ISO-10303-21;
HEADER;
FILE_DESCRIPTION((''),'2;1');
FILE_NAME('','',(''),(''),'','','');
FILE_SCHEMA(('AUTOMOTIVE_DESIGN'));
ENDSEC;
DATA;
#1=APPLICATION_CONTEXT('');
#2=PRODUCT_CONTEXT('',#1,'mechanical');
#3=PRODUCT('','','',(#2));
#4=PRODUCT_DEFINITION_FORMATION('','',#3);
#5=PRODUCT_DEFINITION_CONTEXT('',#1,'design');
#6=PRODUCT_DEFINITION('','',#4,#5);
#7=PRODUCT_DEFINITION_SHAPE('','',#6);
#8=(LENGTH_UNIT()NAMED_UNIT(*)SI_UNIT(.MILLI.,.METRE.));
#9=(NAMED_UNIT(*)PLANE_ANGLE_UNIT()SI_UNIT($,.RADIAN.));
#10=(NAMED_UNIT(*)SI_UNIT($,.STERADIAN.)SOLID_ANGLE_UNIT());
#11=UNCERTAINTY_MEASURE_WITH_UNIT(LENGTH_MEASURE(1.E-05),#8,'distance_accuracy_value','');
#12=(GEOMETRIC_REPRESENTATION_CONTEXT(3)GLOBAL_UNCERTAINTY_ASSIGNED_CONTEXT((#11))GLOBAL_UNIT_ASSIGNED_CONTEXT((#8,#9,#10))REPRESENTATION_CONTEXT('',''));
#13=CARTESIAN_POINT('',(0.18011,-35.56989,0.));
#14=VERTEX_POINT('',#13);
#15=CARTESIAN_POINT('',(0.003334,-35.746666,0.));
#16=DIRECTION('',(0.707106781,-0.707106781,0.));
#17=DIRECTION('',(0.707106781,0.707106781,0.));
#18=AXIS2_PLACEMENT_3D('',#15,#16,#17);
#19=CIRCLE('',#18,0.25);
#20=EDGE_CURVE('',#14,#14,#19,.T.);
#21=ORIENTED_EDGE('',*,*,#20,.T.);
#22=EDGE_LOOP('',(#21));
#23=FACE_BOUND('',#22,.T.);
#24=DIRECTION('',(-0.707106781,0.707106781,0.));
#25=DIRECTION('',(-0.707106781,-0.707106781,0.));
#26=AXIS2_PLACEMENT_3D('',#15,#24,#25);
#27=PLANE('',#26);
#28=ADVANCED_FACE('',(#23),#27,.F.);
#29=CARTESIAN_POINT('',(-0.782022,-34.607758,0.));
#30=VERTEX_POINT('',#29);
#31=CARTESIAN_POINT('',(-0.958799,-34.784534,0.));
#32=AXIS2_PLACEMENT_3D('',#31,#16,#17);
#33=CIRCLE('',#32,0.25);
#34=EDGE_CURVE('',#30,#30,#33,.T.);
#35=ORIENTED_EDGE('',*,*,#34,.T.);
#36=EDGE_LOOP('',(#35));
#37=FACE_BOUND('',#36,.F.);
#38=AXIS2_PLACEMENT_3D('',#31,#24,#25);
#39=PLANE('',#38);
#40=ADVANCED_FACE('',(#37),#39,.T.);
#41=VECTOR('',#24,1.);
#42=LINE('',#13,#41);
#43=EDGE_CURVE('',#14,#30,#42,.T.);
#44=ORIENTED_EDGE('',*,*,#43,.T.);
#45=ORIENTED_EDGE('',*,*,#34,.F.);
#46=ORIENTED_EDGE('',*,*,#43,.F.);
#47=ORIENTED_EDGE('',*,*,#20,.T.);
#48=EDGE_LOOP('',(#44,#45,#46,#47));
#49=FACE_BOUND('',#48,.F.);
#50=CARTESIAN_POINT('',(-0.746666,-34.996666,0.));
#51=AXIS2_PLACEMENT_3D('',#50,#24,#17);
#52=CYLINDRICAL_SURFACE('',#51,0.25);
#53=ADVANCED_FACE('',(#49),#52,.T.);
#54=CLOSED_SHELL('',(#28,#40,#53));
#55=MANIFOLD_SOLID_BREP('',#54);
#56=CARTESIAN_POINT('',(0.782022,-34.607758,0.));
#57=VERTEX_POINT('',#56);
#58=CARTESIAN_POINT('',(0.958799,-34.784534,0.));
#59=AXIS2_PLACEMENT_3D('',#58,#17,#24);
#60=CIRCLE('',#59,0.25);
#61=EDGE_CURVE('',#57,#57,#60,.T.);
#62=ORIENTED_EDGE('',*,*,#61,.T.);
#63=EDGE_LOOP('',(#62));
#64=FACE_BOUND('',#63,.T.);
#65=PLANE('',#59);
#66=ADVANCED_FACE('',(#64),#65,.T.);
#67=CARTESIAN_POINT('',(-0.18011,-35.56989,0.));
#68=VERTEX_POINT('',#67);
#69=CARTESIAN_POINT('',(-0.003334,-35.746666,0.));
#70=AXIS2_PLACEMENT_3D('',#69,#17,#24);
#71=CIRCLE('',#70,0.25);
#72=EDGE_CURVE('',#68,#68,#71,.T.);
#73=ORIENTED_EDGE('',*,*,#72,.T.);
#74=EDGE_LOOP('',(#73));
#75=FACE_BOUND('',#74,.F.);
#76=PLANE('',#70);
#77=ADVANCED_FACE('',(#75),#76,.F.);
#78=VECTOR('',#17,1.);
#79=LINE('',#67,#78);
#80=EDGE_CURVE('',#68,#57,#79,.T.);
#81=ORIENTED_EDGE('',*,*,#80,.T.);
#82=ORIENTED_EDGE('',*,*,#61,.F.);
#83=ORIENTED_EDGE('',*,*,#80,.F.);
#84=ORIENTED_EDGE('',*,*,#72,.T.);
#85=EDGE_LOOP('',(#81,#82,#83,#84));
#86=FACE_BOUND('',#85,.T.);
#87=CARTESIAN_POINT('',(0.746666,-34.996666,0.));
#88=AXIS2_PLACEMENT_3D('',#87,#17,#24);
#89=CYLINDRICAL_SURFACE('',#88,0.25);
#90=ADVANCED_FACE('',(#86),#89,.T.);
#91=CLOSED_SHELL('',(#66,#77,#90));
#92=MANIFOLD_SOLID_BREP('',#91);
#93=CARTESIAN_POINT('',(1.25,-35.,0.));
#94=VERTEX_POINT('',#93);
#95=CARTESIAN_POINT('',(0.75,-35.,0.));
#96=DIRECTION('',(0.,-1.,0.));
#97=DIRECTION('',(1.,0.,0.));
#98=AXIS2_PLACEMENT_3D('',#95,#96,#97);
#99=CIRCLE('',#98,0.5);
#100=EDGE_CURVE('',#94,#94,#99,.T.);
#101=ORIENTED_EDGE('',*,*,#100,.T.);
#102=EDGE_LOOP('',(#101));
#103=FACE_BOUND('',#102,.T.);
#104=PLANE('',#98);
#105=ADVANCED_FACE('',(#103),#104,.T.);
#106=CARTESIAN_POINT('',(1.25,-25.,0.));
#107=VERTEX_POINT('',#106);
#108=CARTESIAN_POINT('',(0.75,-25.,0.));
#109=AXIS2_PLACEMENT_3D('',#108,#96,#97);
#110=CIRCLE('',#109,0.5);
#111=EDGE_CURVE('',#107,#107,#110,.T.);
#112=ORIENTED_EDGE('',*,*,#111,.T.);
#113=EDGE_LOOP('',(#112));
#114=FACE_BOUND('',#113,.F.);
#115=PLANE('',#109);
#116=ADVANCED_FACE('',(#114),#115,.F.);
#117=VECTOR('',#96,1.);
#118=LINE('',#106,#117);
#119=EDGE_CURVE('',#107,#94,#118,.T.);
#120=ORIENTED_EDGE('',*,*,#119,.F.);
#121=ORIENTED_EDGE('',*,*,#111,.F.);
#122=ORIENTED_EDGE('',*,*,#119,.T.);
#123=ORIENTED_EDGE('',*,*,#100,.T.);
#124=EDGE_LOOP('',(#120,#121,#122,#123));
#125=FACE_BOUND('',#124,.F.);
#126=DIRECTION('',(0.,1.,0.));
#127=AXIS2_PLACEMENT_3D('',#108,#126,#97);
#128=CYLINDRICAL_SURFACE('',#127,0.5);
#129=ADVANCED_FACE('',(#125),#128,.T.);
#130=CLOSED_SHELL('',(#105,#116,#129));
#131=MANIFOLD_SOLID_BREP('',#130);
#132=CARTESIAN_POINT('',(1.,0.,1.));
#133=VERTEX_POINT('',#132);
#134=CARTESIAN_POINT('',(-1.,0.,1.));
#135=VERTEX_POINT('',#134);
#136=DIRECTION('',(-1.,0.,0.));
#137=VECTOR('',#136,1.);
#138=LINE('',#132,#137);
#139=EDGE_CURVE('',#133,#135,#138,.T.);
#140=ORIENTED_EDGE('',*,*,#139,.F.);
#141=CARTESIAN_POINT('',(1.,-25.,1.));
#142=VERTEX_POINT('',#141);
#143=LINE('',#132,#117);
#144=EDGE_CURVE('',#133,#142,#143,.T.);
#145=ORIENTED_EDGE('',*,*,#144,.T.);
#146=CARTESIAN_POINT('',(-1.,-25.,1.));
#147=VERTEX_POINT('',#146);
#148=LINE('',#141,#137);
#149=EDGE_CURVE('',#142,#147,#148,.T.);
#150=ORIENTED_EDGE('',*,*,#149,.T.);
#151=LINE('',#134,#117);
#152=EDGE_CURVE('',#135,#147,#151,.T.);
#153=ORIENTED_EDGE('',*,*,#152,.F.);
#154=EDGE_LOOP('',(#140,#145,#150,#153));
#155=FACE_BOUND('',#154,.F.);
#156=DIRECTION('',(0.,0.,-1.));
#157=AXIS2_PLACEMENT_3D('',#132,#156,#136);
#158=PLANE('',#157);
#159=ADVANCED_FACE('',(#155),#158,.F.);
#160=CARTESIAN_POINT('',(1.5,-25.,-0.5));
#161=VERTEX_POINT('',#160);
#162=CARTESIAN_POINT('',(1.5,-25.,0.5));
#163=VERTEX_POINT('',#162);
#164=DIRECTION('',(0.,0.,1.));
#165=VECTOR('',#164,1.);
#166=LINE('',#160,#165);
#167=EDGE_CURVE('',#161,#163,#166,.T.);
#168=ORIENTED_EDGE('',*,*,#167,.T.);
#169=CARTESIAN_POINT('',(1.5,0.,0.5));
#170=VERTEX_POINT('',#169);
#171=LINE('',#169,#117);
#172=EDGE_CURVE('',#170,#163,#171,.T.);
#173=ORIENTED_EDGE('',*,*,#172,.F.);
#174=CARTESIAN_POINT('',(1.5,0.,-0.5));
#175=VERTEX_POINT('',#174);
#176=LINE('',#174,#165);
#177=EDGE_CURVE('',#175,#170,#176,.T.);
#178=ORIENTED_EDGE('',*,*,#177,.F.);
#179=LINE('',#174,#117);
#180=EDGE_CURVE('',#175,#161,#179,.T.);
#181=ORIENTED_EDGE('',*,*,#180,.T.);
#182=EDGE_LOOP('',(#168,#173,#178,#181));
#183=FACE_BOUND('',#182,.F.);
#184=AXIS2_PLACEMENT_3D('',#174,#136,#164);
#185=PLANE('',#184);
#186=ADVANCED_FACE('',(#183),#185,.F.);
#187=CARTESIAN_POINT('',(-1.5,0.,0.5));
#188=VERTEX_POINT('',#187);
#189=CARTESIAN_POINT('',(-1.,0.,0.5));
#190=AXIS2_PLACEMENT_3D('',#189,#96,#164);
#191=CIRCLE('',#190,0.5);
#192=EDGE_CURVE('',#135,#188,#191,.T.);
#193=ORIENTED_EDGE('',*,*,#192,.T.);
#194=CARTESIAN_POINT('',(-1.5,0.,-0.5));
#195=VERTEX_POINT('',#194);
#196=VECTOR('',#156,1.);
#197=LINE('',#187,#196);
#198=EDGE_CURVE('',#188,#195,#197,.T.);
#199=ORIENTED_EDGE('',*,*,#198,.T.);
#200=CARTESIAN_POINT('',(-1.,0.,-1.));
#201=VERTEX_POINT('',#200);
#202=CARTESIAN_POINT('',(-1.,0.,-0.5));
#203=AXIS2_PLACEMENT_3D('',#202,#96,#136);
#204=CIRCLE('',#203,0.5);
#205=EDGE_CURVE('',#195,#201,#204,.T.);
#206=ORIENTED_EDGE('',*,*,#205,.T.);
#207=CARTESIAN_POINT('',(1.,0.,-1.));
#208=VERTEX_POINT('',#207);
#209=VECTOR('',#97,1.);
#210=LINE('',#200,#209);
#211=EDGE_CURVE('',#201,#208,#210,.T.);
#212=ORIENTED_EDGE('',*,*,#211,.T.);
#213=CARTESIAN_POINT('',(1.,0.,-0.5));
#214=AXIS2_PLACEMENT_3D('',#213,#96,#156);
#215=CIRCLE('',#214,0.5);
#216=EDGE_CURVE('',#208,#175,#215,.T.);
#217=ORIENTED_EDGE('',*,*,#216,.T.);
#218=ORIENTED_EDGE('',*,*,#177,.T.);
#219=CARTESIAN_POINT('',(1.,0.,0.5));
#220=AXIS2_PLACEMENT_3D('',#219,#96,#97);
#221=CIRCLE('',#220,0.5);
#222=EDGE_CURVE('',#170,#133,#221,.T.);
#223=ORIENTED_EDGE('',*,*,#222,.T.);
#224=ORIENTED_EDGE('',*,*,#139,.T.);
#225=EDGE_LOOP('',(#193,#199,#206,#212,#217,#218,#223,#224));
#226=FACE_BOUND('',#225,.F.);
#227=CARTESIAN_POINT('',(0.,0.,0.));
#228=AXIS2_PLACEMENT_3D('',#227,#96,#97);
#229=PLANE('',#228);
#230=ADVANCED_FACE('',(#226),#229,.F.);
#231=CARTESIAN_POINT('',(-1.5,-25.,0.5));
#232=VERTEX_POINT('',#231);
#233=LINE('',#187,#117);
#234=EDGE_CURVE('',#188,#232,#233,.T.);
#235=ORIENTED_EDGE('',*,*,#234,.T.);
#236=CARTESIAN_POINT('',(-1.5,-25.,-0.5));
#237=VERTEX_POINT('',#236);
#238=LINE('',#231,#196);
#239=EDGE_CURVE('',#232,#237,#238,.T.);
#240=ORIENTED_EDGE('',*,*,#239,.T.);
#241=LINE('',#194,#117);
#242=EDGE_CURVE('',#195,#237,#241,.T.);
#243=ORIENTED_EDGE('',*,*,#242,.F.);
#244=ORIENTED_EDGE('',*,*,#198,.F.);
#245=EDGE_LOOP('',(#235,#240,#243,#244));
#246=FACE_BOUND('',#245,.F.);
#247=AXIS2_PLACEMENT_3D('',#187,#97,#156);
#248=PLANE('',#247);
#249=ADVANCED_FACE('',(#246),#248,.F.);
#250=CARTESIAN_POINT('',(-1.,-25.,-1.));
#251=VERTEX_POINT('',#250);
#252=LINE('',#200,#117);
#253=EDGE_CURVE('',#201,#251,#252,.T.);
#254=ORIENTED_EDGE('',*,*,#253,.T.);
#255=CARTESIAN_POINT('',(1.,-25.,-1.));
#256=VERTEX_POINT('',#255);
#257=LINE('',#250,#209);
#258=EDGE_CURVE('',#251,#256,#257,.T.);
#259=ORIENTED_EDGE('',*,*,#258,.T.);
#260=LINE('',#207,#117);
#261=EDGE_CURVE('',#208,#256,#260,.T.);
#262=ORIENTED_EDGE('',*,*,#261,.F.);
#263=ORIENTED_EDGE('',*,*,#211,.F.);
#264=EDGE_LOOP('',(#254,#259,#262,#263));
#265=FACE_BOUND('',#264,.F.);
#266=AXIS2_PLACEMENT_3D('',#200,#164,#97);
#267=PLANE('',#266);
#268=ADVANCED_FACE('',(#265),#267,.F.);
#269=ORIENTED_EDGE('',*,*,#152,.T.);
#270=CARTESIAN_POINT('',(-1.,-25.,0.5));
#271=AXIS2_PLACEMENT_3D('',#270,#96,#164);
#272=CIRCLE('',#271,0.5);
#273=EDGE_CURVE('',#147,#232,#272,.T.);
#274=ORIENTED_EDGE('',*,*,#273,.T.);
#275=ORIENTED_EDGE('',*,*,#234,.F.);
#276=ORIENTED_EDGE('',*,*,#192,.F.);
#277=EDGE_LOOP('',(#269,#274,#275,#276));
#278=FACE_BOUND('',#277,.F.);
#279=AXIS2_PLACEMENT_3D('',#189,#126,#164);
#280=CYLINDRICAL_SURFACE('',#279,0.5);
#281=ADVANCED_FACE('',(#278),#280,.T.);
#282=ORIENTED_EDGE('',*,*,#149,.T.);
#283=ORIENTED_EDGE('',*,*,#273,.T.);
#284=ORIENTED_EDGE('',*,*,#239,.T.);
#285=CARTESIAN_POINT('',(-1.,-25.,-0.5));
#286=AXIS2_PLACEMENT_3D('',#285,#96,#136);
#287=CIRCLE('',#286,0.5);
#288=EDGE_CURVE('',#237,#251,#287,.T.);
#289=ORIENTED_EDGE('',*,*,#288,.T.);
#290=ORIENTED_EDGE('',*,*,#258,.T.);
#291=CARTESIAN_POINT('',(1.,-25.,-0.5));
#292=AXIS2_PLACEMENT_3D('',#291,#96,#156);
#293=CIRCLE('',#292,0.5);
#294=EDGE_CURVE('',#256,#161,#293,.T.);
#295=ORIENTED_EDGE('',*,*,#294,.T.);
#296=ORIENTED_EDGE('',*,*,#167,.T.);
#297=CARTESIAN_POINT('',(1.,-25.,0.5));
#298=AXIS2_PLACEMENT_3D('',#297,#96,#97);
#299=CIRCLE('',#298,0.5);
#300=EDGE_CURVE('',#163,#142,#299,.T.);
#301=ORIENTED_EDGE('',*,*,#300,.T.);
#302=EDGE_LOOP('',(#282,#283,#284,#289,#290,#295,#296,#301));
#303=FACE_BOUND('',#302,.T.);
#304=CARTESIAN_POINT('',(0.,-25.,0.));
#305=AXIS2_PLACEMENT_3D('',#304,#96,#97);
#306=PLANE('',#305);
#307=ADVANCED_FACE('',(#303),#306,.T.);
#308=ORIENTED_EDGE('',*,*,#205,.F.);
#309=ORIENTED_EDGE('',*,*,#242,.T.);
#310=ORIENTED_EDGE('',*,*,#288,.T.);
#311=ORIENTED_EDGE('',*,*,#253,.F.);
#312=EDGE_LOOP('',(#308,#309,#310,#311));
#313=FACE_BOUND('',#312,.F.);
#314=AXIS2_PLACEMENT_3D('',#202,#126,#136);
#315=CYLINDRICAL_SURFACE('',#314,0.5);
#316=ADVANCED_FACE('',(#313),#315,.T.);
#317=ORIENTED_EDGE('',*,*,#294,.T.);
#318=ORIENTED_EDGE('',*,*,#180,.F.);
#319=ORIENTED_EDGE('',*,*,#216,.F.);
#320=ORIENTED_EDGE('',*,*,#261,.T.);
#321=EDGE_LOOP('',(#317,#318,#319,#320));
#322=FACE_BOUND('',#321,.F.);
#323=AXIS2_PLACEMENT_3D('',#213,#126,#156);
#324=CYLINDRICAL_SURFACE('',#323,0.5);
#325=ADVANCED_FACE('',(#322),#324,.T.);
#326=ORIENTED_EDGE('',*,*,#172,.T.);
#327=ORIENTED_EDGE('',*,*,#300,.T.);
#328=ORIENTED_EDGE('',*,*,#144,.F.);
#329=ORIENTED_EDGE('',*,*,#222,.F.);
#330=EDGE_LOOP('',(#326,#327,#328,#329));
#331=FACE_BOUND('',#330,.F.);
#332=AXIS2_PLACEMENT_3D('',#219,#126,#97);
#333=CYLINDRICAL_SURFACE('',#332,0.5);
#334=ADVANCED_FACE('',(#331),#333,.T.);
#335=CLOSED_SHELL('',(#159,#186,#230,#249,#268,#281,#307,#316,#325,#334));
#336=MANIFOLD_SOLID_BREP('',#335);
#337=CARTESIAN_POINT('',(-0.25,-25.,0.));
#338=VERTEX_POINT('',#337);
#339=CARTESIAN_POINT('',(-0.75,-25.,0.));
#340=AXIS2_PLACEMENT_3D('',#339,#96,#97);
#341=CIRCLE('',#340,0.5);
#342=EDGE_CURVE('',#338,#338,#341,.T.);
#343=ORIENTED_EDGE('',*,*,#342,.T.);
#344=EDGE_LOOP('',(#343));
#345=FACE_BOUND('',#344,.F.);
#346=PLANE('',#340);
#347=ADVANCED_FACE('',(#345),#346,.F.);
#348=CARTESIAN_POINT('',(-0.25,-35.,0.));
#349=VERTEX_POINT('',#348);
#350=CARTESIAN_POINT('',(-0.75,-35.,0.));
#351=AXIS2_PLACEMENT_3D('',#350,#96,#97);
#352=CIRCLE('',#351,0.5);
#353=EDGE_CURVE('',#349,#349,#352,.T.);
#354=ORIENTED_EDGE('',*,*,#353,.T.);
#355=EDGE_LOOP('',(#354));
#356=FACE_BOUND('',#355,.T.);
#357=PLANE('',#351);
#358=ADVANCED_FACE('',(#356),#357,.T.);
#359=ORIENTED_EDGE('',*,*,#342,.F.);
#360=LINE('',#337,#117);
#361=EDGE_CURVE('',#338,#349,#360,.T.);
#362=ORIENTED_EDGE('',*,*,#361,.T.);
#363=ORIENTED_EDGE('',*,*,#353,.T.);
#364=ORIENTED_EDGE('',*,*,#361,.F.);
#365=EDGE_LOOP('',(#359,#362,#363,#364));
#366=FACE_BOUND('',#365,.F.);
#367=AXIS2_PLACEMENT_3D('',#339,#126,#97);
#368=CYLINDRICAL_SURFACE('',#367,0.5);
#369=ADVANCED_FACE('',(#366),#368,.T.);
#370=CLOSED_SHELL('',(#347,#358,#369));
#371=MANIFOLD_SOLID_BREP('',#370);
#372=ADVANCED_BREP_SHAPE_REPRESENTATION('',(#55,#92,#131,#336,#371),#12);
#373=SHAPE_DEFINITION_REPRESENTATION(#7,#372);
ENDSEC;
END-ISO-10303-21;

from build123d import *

# Parameters (mm, degrees)
F1_DEPTH      = 25
F2_R          = 0.5
F3_DEPTH      = 10
F6_R          = 0.25
F7_DEPTH      = 0.3
F7_DEPTH_BACK = 1.0606601718


# Not quite as in the source:
# - the program builds the solid bodies; features that only make, move or delete a surface that nothing else refers to are left out


with BuildPart() as f1:
    # F0 (on Front) → F1 (new body)
    with BuildSketch(Plane.XZ):
        with BuildLine():
            Line((-1, -1), (1, -1))
            ThreePointArc((1, -1), (1.3535533906, -0.8535533906), (1.5, -0.5))
            Line((1.5, -0.5), (1.5, 0.5))
            ThreePointArc((1.5, 0.5), (1.3535533906, 0.8535533906), (1, 1))
            Line((1, 1), (-1, 1))
            ThreePointArc((-1, 1), (-1.3535533906, 0.8535533906), (-1.5, 0.5))
            Line((-1.5, 0.5), (-1.5, -0.5))
            ThreePointArc((-1.5, -0.5), (-1.3535533906, -0.8535533906), (-1, -1))
        make_face()
    extrude(amount=F1_DEPTH)


with BuildPart() as f3:
    # F2 (on face) → F3 (new body)
    with BuildSketch(Plane.XZ.offset(25)):
        with Locations((-0.75, 0)):
            Circle(F2_R)
    extrude(amount=F3_DEPTH)


with BuildPart() as f3b:
    # F2 (on face) → F3, piece 2 (new body)
    with BuildSketch(Plane.XZ.offset(25)):
        with Locations((0.75, 0)):
            Circle(F2_R)
    extrude(amount=F3_DEPTH)


with BuildPart() as f7:
    # F6 (on face) → F7 (new body, two sides)
    with BuildSketch(Plane(origin=(-17.125, -17.125, 0), x_dir=(-0.7071067812, 0.7071067812, 0), z_dir=(0.7071067812, 0.7071067812, 0))) as f7_sk:
        with Locations((-25.2743531018, 0)):
            Circle(F6_R)
    extrude(amount=F7_DEPTH)
    extrude(f7_sk.sketch, amount=-F7_DEPTH_BACK)


with BuildPart() as f8_1:
    # F8: instance of F7
    add(f7.part.mirror(Plane.YZ))


solid = Compound([f1.part, f3.part, f3b.part, f7.part, f8_1.part])
